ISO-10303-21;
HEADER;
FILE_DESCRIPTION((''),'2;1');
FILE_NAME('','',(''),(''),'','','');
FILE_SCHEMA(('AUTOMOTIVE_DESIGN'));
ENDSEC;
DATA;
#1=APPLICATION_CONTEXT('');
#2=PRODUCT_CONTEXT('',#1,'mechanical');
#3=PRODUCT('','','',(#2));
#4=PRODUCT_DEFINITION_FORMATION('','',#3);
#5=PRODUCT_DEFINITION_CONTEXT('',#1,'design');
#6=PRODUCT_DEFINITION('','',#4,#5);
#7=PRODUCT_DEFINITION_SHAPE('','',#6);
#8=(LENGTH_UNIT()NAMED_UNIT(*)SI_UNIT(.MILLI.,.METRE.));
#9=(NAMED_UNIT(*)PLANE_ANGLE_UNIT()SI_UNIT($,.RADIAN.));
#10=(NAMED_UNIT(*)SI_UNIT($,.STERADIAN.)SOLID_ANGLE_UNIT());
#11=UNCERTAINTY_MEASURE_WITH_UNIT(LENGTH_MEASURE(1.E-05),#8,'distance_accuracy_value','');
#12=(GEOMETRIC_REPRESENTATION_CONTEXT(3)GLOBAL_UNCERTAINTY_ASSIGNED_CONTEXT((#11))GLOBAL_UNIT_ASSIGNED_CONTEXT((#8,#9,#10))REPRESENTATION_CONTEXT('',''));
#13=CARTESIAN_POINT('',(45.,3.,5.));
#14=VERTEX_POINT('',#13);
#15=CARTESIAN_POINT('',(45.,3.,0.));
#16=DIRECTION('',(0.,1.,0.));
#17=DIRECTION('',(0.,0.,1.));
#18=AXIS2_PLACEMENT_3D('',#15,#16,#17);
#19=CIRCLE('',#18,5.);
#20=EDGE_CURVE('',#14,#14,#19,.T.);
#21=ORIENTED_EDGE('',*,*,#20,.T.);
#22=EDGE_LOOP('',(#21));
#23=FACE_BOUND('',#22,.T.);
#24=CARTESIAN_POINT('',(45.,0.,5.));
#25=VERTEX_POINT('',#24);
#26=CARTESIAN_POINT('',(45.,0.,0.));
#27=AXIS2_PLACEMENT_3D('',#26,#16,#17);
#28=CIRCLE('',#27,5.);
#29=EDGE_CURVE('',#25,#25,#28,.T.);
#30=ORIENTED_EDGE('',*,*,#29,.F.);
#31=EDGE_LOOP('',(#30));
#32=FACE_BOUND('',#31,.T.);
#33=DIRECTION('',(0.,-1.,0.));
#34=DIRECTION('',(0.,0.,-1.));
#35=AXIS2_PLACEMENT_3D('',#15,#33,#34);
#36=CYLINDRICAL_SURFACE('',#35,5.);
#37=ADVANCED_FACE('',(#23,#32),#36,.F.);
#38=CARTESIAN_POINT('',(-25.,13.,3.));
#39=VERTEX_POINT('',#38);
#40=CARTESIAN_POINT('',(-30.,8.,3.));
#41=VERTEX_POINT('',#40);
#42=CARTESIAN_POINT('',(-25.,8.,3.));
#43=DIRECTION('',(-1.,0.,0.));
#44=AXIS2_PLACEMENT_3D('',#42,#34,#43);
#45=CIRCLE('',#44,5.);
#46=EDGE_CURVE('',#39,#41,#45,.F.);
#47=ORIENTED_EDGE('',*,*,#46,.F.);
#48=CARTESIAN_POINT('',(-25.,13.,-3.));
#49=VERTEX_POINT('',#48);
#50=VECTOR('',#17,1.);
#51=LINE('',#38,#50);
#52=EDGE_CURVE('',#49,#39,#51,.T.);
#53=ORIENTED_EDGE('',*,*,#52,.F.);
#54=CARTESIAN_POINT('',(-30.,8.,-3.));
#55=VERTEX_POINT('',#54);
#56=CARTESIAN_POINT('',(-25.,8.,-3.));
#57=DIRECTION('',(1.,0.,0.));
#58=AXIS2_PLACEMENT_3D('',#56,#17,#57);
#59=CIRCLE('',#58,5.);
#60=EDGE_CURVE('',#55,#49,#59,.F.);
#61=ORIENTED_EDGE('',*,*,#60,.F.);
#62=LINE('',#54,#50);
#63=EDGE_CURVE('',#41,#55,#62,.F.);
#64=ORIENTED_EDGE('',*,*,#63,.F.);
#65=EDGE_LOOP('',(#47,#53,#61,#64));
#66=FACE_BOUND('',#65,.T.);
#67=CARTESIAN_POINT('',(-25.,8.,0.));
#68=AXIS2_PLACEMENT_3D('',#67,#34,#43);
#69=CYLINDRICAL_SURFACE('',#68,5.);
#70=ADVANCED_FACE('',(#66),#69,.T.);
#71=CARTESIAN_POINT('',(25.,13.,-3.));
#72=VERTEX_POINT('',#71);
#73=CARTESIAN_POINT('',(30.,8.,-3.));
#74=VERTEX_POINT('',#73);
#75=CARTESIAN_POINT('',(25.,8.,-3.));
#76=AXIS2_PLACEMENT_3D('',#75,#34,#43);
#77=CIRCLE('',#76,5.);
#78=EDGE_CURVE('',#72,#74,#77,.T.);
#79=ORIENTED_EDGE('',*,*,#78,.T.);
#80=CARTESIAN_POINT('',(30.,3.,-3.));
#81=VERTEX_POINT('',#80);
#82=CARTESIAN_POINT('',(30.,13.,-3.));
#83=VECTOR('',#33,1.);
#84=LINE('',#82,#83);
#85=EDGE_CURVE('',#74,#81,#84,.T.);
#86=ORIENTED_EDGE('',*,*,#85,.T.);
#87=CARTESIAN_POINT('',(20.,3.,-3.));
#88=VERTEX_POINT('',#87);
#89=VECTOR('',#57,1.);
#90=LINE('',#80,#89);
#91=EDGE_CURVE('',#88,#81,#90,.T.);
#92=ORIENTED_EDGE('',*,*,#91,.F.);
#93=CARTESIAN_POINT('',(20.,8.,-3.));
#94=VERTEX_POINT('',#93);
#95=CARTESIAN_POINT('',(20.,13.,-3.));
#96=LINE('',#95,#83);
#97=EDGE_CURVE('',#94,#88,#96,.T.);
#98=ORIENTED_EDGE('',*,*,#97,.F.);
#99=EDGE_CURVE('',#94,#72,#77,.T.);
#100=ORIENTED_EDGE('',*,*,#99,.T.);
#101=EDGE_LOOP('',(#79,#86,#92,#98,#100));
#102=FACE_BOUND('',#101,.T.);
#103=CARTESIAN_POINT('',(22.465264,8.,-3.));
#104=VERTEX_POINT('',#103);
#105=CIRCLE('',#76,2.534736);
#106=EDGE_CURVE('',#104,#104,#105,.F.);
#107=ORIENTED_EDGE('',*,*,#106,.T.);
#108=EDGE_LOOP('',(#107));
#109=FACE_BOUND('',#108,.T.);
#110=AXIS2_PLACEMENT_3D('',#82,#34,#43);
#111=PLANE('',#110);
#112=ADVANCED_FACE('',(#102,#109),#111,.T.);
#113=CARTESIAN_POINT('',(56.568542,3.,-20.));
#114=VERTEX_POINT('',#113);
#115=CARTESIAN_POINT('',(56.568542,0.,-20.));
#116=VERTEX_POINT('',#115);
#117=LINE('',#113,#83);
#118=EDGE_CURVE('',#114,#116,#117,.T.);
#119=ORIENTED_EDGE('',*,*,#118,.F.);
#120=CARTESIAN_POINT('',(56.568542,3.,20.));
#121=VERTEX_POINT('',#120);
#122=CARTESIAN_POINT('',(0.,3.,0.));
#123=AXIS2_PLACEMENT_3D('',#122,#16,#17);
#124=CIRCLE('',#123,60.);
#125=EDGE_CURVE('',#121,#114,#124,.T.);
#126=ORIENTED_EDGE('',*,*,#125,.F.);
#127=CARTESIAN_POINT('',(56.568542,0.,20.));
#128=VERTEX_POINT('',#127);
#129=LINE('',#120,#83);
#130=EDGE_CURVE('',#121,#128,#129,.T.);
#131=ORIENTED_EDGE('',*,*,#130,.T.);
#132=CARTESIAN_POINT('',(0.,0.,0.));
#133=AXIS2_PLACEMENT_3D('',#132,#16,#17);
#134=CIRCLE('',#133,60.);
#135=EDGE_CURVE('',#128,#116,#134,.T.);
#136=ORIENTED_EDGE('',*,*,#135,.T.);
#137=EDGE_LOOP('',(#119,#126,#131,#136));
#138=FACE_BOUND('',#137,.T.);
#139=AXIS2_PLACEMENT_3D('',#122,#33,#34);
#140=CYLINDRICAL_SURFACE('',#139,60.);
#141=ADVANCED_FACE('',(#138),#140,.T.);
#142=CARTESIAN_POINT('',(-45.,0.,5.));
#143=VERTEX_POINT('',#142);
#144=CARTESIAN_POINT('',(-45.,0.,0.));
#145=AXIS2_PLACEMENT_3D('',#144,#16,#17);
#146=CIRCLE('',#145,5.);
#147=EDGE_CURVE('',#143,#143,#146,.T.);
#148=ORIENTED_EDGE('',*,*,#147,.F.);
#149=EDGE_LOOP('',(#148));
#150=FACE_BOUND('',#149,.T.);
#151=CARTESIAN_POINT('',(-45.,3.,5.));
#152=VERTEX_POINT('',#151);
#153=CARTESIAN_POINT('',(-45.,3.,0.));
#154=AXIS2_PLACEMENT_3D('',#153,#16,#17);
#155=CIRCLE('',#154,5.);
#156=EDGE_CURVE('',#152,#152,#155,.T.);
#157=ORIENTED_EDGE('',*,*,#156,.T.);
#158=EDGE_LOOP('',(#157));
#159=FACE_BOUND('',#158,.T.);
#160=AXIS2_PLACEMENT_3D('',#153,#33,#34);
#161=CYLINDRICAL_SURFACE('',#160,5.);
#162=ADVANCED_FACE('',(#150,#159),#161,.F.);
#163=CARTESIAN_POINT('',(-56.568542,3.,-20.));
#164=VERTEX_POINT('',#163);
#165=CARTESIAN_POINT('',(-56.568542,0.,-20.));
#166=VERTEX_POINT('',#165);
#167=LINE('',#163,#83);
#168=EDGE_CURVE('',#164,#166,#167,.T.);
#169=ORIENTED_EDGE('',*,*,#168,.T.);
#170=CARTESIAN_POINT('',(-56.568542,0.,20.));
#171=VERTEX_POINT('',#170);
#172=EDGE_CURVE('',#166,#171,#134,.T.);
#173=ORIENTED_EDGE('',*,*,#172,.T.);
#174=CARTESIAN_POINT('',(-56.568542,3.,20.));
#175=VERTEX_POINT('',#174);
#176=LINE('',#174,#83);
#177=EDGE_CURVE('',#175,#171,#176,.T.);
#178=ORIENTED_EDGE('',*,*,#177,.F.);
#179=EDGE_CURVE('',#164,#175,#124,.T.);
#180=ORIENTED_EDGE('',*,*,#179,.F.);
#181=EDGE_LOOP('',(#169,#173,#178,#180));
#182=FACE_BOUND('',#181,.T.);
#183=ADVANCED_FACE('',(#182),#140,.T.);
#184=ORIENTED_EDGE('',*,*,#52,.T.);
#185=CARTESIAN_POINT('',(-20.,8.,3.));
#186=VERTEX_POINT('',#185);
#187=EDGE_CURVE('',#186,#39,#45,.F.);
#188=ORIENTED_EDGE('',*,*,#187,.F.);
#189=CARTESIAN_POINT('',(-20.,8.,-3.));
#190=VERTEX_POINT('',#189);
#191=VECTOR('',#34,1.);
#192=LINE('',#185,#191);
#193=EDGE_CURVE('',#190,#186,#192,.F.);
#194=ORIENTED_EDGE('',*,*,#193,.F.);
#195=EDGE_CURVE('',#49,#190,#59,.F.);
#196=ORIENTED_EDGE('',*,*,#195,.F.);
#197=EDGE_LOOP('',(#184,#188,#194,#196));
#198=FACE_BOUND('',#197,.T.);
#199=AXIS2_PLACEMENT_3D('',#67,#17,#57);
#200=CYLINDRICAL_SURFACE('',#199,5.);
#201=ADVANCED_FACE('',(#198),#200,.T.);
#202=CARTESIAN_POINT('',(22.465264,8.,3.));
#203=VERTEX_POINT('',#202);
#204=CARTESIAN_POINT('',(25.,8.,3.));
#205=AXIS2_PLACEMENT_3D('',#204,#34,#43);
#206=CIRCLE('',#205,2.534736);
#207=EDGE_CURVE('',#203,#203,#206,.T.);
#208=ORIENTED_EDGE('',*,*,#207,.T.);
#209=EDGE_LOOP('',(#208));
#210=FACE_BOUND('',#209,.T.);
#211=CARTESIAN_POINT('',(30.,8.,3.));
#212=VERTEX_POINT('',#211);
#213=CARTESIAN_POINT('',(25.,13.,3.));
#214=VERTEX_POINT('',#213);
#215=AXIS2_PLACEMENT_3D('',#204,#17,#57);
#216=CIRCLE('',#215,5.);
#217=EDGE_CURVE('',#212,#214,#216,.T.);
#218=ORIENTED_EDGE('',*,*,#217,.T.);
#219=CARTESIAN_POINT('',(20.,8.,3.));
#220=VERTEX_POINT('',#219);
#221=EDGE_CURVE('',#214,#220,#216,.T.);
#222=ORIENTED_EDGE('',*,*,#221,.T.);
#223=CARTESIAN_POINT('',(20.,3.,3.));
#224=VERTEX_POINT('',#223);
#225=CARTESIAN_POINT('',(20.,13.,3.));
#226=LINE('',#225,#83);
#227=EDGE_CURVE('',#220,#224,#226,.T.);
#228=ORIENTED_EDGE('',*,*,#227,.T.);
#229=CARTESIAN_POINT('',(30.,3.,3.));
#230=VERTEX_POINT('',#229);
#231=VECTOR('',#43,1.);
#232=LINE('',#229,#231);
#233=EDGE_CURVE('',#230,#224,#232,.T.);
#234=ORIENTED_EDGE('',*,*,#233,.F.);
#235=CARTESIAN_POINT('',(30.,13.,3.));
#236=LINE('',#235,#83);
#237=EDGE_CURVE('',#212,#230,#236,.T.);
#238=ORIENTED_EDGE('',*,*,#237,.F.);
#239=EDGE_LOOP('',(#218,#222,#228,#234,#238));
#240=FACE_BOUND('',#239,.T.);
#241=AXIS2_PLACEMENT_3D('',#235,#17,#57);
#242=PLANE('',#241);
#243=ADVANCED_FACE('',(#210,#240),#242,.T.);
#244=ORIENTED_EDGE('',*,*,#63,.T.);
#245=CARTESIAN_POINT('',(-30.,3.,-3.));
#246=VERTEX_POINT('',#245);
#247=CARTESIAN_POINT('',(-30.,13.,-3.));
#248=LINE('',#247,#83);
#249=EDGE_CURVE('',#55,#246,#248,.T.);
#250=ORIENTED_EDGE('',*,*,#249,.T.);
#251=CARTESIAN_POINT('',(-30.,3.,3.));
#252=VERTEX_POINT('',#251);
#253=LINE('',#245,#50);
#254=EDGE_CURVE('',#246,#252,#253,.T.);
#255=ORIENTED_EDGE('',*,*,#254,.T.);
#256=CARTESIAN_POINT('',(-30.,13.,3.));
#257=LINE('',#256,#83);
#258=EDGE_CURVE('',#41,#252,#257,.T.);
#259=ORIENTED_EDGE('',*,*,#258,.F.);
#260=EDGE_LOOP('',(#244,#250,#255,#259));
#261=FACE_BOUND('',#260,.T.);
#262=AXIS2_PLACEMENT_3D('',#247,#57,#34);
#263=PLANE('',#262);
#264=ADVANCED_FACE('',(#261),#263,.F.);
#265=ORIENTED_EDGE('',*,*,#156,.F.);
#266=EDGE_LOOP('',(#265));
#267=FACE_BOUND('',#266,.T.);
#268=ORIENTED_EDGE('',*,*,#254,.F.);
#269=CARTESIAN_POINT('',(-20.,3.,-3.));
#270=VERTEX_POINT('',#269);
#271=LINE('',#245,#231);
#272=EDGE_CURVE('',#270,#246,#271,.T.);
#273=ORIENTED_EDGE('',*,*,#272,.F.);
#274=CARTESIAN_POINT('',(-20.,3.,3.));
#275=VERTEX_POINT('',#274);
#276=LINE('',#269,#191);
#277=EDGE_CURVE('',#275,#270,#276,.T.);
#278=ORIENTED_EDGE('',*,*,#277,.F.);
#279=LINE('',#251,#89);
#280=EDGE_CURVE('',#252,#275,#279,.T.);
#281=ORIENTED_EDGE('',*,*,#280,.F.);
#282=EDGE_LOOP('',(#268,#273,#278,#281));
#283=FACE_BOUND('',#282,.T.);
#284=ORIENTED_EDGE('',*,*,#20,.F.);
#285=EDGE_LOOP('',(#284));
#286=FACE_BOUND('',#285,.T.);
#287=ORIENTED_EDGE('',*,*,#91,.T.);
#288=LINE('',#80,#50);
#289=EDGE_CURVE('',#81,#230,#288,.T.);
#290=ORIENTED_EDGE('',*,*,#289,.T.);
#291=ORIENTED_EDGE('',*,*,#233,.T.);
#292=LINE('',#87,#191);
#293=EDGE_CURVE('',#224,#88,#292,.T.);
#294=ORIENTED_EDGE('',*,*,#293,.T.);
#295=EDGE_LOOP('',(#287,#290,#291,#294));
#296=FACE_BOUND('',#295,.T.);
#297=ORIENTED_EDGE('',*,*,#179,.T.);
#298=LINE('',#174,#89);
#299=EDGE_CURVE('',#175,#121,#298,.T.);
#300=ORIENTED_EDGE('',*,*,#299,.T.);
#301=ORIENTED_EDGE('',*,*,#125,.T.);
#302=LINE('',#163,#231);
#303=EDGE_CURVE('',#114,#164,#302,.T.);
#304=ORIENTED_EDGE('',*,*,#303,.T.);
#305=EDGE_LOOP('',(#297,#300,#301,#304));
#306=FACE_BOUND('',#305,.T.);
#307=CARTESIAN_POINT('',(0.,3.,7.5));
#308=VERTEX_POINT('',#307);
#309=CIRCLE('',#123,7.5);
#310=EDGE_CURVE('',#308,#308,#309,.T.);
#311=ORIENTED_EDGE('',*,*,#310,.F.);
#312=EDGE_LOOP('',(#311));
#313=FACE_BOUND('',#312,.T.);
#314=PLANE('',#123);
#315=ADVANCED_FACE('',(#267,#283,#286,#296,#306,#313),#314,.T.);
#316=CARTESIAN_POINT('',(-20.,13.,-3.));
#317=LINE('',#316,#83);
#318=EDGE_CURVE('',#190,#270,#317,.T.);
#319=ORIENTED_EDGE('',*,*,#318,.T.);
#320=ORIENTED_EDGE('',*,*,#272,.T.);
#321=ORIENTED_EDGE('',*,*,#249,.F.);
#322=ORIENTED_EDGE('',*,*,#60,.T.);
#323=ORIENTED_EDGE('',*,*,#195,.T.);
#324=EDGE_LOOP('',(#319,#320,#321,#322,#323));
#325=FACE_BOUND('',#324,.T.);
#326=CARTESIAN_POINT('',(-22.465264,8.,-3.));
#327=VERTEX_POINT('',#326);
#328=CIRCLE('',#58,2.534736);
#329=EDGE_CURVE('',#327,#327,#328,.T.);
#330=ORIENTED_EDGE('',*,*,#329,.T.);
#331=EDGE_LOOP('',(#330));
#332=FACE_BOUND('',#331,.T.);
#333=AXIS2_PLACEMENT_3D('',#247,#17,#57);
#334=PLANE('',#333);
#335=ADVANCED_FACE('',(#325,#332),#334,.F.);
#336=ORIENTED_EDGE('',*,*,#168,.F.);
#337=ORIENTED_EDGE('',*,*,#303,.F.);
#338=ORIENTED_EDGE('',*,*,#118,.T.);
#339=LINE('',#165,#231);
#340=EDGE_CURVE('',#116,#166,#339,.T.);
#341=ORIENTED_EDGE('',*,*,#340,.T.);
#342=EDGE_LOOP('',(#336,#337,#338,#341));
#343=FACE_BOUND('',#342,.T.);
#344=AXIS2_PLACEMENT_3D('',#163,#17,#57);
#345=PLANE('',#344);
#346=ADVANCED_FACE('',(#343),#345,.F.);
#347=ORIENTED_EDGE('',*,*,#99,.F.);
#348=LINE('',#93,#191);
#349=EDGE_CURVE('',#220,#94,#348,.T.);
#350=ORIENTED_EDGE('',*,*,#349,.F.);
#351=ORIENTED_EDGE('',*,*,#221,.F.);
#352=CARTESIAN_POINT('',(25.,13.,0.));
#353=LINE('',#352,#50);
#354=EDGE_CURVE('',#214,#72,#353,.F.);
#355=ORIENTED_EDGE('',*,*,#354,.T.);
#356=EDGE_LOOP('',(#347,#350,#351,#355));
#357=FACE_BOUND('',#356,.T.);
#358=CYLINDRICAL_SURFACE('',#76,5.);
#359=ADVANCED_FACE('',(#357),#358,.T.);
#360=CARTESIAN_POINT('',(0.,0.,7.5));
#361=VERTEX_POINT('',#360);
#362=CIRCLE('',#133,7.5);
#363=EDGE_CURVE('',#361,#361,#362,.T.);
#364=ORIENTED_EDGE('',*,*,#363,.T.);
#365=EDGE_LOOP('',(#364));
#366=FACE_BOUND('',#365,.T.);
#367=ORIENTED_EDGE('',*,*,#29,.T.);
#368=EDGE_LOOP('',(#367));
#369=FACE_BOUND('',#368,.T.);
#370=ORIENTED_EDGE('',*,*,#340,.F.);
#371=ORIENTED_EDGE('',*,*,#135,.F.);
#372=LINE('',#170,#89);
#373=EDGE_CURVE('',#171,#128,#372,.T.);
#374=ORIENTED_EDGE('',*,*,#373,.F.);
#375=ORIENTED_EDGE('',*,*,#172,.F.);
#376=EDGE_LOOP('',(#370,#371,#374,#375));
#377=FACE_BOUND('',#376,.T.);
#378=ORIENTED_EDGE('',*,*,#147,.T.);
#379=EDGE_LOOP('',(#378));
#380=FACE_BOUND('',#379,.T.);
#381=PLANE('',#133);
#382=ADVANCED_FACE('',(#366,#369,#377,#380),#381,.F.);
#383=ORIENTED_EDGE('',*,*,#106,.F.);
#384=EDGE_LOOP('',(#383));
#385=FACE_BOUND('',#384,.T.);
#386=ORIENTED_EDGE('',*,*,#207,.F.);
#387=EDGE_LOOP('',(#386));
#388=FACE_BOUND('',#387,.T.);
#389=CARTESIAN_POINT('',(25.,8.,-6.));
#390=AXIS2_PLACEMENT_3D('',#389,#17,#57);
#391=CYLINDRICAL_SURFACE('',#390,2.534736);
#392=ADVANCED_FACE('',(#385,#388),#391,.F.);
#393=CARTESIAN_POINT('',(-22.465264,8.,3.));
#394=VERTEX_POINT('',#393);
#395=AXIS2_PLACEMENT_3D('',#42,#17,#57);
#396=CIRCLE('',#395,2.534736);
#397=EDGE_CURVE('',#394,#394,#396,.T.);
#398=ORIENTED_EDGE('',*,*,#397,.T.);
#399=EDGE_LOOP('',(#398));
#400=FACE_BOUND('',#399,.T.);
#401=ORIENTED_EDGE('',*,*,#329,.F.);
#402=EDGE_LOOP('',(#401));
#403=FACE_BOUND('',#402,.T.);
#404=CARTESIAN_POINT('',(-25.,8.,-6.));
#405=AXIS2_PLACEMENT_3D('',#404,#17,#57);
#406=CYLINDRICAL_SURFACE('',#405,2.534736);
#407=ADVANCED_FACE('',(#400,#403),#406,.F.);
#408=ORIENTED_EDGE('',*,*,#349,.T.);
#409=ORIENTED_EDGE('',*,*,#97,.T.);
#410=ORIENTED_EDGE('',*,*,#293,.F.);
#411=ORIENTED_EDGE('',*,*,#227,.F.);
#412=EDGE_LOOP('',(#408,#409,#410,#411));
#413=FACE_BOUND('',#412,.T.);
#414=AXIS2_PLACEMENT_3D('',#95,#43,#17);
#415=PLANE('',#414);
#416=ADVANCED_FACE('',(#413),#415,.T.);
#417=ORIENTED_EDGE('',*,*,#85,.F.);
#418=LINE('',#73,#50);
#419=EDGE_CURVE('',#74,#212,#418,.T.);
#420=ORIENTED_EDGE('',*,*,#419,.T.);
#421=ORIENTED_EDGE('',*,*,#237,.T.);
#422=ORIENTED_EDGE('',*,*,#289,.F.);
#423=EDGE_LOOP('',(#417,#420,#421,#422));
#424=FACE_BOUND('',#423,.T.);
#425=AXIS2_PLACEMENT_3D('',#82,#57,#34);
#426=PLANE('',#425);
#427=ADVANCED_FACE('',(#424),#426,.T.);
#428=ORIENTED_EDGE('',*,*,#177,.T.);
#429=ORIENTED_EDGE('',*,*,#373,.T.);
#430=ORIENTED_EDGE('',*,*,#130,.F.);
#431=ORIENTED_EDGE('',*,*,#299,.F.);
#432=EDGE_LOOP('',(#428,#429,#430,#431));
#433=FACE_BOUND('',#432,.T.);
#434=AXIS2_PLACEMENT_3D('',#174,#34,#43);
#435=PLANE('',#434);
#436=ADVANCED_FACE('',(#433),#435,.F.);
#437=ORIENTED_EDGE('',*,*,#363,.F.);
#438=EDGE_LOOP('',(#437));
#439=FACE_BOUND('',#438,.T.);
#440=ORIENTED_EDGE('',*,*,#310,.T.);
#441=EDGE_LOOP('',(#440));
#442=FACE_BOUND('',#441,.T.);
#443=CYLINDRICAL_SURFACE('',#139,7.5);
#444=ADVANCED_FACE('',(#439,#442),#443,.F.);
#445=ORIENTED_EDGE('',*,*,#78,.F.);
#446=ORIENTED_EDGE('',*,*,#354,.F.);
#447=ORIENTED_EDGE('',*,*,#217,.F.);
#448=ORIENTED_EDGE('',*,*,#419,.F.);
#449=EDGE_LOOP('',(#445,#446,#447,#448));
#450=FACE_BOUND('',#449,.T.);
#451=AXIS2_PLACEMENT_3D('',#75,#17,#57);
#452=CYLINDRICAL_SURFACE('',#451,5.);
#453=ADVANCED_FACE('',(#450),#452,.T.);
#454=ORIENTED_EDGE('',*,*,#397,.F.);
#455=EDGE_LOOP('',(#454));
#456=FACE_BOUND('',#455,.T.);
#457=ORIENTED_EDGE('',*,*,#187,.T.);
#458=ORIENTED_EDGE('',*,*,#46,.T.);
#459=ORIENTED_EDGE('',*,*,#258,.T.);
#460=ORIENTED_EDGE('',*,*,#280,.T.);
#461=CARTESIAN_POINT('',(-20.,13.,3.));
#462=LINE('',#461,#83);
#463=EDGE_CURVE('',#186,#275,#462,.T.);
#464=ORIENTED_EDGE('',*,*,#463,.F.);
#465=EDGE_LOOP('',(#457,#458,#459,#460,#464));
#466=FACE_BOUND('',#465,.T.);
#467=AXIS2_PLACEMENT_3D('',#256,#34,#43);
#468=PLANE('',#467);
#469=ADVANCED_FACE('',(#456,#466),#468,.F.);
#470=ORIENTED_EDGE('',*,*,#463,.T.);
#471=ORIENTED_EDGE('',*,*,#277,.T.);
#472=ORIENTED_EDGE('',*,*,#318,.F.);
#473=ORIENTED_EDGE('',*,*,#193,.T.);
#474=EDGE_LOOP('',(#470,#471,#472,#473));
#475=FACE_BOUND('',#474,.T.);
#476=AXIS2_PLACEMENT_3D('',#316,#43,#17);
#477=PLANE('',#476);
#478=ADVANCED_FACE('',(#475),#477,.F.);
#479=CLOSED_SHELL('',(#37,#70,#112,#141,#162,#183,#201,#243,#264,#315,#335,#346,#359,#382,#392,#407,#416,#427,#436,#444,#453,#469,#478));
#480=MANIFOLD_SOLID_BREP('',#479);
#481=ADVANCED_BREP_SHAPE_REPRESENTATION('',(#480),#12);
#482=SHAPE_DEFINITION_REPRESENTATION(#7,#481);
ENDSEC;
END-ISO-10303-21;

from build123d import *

# Parameters (mm, degrees)
SCHIZZO1_R                   = 5
SCHIZZO1_R_2                 = 7.5
ESTRUSIONE_ESTRUSIONE1_DEPTH = 3
SCHIZZO3_W                   = 10
SCHIZZO3_H                   = 6
ESTRUSIONE_ESTRUSIONE2_DEPTH = 10
SCHIZZO4_R                   = 2.534735547
TAGLIO_ESTRUSIONE1_DEPTH     = 9
RACCORDO1_R                  = 5
RACCORDO1_OF_SPECCHIA1_R     = 5


with BuildPart() as part:
    # Schizzo1 → Estrusione-Estrusione1 (new body)
    with BuildSketch(Plane(origin=(0, 0, 0), x_dir=(1, 0, 0), z_dir=(0, 1, 0))):
        with BuildLine():
            Line((-56.568542495, 20), (56.568542495, 20))
            ThreePointArc((56.568542495, 20), (60, 0), (56.568542495, -20))
            Line((56.568542495, -20), (-56.568542495, -20))
            ThreePointArc((-56.568542495, -20), (-60, 0), (-56.568542495, 20))
        make_face()
        with Locations(Location((45, 0, 0), (0, 0, 270))):
            Circle(SCHIZZO1_R, mode=Mode.SUBTRACT)
        with Locations(Location((-45, 0, 0), (0, 0, 270))):
            Circle(SCHIZZO1_R, mode=Mode.SUBTRACT)
        with Locations(Location((0, 0, 0), (0, 0, 270))):
            Circle(SCHIZZO1_R_2, mode=Mode.SUBTRACT)
    extrude(amount=ESTRUSIONE_ESTRUSIONE1_DEPTH)

    # Schizzo3 → Estrusione-Estrusione2 (add)
    with BuildSketch(Plane(origin=(0, 3, 0), x_dir=(1, 0, 0), z_dir=(0, 1, 0))):
        with Locations((-25, 0)):
            Rectangle(SCHIZZO3_W, SCHIZZO3_H)
    estrusione_estrusione2 = extrude(amount=ESTRUSIONE_ESTRUSIONE2_DEPTH)

    # Schizzo4 → Taglio-Estrusione1 (cut)
    with BuildSketch(Plane.XY.offset(3)):
        with Locations((-25, 8)):
            Circle(SCHIZZO4_R)
    taglio_estrusione1 = extrude(amount=-TAGLIO_ESTRUSIONE1_DEPTH, mode=Mode.SUBTRACT)

    # Raccordo1
    raccordo1_edges = [part.edges().sort_by_distance(p)[0] for p in [
        (-20, 13, 0),
        (-30, 13, 0),
    ]]
    fillet(raccordo1_edges, radius=RACCORDO1_R - 0.0001)  # a hair under: the kernel refuses the full size

    # Specchia1: Estrusione-Estrusione2, Taglio-Estrusione1 across plane
    add(estrusione_estrusione2.mirror(Plane(origin=(0, 0, 0), x_dir=(0, 0, 1), z_dir=(1, 0, 0))))
    add(taglio_estrusione1.mirror(Plane(origin=(0, 0, 0), x_dir=(0, 0, 1), z_dir=(1, 0, 0))), mode=Mode.SUBTRACT)

    # Raccordo1 of Specchia1
    raccordo1_of_specchia1_edges = [part.edges().sort_by_distance(p)[0] for p in [
        (20, 13, 0),
        (30, 13, 0),
    ]]
    fillet(raccordo1_of_specchia1_edges, radius=RACCORDO1_OF_SPECCHIA1_R - 0.0001)  # a hair under: the kernel refuses the full size


solid = part.part
